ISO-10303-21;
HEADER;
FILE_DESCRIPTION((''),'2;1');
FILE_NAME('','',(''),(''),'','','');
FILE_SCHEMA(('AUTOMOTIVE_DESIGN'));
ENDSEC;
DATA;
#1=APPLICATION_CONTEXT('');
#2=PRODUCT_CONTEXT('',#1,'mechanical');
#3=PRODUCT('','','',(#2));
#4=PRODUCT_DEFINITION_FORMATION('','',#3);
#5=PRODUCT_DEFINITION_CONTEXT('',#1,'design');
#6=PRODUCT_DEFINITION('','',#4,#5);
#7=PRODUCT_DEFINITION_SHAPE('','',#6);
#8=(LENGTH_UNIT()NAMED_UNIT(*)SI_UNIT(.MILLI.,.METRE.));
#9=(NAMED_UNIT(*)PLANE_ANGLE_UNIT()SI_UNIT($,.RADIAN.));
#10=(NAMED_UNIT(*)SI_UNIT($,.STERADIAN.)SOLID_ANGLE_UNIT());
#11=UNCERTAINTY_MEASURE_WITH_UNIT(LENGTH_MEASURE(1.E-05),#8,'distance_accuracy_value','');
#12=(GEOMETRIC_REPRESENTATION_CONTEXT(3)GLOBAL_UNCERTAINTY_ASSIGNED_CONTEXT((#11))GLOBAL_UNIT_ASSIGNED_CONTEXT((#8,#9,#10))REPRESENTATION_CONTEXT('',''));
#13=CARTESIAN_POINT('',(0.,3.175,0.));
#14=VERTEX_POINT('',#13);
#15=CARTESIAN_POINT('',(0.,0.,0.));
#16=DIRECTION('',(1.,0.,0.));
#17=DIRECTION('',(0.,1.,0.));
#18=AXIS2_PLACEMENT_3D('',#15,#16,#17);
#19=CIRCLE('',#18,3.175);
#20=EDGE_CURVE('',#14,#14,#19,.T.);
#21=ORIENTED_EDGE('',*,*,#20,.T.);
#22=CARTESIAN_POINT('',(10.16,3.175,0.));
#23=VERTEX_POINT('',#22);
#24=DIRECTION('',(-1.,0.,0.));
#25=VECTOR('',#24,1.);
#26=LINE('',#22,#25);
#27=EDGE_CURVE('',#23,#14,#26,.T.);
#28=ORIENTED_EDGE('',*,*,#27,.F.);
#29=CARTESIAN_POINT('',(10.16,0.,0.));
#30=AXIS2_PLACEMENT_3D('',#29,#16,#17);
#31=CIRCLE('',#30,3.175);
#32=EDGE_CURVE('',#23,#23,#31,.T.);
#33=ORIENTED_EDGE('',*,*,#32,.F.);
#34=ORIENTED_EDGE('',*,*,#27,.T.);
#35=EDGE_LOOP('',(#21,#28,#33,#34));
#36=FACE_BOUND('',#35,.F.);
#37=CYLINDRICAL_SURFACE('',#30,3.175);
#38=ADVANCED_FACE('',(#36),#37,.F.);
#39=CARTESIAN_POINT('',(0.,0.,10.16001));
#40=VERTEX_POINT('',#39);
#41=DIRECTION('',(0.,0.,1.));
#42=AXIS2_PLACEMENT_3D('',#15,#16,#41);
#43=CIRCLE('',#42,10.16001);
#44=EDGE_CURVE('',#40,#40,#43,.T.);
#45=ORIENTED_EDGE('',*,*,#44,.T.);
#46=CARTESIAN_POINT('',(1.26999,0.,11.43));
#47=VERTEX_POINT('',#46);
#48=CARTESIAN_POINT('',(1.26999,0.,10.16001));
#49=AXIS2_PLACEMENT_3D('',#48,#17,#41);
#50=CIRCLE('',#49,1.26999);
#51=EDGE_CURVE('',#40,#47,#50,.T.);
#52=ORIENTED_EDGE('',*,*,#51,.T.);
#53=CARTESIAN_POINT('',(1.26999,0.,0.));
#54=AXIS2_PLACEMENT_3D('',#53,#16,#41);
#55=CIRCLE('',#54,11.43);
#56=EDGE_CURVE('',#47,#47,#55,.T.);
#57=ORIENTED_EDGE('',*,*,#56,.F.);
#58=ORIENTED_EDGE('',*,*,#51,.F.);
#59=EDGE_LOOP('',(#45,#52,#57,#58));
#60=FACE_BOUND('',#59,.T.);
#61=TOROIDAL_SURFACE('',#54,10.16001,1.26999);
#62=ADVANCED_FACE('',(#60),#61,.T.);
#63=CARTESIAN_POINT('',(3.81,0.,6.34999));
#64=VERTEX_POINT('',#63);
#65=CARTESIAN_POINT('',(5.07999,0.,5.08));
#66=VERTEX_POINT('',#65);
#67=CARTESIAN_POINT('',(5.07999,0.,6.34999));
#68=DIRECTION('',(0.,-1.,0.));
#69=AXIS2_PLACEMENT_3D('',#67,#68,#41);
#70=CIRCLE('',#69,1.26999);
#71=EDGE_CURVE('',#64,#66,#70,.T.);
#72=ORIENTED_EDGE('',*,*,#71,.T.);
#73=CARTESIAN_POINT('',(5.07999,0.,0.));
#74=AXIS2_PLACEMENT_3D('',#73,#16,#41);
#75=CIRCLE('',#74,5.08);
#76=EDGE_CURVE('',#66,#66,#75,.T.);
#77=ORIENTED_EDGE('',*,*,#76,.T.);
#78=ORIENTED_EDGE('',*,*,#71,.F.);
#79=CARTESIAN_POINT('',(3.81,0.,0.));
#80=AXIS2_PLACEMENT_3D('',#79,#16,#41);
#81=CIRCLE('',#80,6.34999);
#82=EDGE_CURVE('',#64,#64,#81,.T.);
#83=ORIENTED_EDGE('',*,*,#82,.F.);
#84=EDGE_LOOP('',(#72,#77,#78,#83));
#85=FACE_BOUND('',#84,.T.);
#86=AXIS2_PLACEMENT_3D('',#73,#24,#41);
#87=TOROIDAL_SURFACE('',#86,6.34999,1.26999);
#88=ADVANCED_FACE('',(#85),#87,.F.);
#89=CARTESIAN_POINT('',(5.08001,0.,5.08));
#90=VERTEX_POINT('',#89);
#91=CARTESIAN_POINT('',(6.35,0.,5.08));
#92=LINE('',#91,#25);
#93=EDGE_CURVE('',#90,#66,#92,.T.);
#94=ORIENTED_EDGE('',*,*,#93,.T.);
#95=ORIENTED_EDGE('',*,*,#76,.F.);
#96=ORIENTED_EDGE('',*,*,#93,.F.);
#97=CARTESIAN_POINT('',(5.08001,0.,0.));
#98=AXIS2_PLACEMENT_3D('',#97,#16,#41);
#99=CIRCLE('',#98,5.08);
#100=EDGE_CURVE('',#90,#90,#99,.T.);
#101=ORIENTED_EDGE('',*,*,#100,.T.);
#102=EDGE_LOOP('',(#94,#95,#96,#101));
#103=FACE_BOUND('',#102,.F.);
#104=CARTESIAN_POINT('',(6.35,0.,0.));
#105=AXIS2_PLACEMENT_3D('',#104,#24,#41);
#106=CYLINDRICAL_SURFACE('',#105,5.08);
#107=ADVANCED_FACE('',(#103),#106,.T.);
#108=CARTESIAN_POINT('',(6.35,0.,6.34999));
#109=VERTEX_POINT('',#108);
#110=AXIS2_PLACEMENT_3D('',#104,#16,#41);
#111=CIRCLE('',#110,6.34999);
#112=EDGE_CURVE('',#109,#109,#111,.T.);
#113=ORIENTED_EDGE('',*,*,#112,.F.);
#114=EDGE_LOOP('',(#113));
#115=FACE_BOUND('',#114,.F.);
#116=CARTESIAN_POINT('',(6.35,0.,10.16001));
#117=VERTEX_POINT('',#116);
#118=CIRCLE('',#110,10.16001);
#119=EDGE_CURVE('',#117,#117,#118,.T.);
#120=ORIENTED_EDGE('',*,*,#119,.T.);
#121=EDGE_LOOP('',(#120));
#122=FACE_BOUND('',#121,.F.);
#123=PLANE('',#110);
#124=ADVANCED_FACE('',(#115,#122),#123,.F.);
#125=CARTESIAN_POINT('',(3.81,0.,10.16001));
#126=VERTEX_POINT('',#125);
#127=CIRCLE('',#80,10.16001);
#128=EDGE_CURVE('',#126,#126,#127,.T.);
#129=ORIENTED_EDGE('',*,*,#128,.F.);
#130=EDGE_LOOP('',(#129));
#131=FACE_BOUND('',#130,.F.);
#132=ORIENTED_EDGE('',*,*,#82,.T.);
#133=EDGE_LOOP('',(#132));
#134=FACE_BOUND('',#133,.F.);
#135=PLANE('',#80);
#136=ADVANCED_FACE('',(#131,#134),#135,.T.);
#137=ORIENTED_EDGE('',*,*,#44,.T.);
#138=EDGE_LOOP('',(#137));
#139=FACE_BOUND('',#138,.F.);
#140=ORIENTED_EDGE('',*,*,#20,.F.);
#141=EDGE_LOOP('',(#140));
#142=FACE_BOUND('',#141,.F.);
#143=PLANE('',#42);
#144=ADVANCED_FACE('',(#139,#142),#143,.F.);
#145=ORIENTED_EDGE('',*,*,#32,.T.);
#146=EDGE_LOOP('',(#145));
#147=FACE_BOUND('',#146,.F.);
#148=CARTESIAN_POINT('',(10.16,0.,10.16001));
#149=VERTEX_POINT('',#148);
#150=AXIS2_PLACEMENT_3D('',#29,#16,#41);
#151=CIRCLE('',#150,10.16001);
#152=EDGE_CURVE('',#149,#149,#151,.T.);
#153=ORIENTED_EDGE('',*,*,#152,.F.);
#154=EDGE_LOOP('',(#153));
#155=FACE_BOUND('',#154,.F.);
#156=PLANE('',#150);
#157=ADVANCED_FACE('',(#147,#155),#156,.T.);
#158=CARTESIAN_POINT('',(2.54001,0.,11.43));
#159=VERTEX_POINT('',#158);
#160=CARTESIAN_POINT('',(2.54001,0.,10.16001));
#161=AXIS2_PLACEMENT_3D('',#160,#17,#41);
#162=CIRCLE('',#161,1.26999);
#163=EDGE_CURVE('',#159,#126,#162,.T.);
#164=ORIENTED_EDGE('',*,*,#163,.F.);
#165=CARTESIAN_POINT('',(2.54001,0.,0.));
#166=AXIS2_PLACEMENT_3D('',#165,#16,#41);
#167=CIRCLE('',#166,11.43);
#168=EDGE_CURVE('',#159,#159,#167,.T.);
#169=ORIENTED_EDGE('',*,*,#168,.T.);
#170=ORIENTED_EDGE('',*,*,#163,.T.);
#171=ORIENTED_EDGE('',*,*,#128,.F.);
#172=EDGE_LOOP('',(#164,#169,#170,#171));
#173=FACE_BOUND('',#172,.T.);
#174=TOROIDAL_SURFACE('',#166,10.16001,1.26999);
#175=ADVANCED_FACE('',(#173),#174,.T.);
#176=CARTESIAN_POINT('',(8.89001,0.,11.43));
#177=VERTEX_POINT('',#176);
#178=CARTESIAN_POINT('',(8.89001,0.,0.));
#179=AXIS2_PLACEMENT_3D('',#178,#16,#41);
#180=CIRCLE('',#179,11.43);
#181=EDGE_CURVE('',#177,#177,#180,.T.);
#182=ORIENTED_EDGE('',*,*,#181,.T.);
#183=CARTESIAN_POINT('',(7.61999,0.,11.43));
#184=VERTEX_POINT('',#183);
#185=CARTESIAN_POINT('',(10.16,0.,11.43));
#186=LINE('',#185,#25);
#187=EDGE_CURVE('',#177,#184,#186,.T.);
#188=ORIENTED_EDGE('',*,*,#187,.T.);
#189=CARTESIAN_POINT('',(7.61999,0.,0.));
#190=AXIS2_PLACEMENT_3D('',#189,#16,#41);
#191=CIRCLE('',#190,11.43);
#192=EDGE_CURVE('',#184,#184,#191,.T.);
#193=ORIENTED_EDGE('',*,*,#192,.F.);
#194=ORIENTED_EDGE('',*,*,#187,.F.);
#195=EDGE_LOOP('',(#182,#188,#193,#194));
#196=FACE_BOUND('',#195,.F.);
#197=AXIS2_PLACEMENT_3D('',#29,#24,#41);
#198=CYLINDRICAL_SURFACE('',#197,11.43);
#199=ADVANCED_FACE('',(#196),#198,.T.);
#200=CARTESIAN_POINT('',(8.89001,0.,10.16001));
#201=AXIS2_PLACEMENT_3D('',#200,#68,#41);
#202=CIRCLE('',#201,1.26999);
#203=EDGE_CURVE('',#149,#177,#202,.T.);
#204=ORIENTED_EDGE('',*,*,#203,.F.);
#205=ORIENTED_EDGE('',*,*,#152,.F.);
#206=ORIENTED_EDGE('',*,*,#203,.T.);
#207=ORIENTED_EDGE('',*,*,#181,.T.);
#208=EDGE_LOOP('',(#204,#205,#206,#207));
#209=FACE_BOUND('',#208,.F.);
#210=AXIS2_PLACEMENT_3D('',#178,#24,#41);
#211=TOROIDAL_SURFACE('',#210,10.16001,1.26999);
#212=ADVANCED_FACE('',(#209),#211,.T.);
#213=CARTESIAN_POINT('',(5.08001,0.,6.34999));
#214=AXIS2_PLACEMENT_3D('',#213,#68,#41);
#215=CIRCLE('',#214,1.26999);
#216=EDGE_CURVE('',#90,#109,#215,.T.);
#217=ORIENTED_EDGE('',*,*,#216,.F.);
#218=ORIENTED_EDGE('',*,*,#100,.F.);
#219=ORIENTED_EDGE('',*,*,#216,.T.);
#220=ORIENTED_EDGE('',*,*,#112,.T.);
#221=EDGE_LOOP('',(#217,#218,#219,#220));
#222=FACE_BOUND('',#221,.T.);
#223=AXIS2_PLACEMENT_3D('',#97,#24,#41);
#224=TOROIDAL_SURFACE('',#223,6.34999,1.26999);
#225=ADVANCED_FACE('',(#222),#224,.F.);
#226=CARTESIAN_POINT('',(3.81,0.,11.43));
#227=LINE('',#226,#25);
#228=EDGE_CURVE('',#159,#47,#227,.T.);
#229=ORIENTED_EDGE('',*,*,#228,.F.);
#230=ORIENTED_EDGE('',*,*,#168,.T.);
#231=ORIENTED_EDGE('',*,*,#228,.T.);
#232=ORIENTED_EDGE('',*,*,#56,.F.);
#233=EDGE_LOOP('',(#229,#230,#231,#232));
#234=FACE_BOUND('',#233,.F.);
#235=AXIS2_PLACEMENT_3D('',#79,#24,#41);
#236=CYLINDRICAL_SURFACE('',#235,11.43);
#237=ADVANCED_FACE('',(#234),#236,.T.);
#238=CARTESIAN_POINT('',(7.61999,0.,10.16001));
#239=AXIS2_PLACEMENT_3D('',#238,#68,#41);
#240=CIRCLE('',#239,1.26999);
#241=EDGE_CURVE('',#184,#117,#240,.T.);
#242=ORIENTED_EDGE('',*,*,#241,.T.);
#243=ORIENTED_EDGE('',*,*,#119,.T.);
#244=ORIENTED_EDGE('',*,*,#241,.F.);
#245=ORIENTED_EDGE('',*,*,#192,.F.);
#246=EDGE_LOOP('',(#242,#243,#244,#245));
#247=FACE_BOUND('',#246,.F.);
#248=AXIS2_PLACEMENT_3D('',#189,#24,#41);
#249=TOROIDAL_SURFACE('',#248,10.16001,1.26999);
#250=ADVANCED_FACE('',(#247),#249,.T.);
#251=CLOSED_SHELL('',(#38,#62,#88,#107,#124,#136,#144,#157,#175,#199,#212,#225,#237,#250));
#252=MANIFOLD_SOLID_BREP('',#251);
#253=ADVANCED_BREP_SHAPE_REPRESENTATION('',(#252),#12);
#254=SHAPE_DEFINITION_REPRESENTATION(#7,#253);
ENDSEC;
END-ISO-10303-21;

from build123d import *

# Parameters (mm, degrees)
F2_R     = 3.175
F3_DEPTH = 25.4
F4_R     = 1.26999


# Not quite as in the source:
# - a fillet or chamfer is up to 0.001 mm smaller than in the source, because OpenCascade refuses the exact size


with BuildPart() as f1:
    # F0 (on Front) → F1 (revolve)
    with BuildSketch(Plane.XZ):
        Polygon((0, 11.43), (0, 0), (10.16, 0), (10.16, 11.43), (6.35, 11.43), (6.35, 5.08), (3.81, 5.08), (3.81, 11.43), align=None)
    revolve(axis=Axis((5.08, 0, 0), (1, 0, 0)))

    # F2 (on face) → F3 (cut)
    with BuildSketch(Plane.YZ.offset(10.16)):
        Circle(F2_R)
    extrude(amount=-F3_DEPTH, mode=Mode.SUBTRACT)

    # F4 (radius 1.27 in the source; OpenCascade refuses exactly that, so slightly less here)
    f4_edges = [f1.edges().sort_by_distance(p)[0] for p in [
        (6.35, 0, -5.08),
        (3.81, 0, -5.08),
        (3.81, 0, -11.43),
        (0, 0, -11.43),
        (10.16, 0, -11.43),
        (6.35, 0, -11.43),
    ]]
    fillet(f4_edges, radius=F4_R)


solid = f1.part
